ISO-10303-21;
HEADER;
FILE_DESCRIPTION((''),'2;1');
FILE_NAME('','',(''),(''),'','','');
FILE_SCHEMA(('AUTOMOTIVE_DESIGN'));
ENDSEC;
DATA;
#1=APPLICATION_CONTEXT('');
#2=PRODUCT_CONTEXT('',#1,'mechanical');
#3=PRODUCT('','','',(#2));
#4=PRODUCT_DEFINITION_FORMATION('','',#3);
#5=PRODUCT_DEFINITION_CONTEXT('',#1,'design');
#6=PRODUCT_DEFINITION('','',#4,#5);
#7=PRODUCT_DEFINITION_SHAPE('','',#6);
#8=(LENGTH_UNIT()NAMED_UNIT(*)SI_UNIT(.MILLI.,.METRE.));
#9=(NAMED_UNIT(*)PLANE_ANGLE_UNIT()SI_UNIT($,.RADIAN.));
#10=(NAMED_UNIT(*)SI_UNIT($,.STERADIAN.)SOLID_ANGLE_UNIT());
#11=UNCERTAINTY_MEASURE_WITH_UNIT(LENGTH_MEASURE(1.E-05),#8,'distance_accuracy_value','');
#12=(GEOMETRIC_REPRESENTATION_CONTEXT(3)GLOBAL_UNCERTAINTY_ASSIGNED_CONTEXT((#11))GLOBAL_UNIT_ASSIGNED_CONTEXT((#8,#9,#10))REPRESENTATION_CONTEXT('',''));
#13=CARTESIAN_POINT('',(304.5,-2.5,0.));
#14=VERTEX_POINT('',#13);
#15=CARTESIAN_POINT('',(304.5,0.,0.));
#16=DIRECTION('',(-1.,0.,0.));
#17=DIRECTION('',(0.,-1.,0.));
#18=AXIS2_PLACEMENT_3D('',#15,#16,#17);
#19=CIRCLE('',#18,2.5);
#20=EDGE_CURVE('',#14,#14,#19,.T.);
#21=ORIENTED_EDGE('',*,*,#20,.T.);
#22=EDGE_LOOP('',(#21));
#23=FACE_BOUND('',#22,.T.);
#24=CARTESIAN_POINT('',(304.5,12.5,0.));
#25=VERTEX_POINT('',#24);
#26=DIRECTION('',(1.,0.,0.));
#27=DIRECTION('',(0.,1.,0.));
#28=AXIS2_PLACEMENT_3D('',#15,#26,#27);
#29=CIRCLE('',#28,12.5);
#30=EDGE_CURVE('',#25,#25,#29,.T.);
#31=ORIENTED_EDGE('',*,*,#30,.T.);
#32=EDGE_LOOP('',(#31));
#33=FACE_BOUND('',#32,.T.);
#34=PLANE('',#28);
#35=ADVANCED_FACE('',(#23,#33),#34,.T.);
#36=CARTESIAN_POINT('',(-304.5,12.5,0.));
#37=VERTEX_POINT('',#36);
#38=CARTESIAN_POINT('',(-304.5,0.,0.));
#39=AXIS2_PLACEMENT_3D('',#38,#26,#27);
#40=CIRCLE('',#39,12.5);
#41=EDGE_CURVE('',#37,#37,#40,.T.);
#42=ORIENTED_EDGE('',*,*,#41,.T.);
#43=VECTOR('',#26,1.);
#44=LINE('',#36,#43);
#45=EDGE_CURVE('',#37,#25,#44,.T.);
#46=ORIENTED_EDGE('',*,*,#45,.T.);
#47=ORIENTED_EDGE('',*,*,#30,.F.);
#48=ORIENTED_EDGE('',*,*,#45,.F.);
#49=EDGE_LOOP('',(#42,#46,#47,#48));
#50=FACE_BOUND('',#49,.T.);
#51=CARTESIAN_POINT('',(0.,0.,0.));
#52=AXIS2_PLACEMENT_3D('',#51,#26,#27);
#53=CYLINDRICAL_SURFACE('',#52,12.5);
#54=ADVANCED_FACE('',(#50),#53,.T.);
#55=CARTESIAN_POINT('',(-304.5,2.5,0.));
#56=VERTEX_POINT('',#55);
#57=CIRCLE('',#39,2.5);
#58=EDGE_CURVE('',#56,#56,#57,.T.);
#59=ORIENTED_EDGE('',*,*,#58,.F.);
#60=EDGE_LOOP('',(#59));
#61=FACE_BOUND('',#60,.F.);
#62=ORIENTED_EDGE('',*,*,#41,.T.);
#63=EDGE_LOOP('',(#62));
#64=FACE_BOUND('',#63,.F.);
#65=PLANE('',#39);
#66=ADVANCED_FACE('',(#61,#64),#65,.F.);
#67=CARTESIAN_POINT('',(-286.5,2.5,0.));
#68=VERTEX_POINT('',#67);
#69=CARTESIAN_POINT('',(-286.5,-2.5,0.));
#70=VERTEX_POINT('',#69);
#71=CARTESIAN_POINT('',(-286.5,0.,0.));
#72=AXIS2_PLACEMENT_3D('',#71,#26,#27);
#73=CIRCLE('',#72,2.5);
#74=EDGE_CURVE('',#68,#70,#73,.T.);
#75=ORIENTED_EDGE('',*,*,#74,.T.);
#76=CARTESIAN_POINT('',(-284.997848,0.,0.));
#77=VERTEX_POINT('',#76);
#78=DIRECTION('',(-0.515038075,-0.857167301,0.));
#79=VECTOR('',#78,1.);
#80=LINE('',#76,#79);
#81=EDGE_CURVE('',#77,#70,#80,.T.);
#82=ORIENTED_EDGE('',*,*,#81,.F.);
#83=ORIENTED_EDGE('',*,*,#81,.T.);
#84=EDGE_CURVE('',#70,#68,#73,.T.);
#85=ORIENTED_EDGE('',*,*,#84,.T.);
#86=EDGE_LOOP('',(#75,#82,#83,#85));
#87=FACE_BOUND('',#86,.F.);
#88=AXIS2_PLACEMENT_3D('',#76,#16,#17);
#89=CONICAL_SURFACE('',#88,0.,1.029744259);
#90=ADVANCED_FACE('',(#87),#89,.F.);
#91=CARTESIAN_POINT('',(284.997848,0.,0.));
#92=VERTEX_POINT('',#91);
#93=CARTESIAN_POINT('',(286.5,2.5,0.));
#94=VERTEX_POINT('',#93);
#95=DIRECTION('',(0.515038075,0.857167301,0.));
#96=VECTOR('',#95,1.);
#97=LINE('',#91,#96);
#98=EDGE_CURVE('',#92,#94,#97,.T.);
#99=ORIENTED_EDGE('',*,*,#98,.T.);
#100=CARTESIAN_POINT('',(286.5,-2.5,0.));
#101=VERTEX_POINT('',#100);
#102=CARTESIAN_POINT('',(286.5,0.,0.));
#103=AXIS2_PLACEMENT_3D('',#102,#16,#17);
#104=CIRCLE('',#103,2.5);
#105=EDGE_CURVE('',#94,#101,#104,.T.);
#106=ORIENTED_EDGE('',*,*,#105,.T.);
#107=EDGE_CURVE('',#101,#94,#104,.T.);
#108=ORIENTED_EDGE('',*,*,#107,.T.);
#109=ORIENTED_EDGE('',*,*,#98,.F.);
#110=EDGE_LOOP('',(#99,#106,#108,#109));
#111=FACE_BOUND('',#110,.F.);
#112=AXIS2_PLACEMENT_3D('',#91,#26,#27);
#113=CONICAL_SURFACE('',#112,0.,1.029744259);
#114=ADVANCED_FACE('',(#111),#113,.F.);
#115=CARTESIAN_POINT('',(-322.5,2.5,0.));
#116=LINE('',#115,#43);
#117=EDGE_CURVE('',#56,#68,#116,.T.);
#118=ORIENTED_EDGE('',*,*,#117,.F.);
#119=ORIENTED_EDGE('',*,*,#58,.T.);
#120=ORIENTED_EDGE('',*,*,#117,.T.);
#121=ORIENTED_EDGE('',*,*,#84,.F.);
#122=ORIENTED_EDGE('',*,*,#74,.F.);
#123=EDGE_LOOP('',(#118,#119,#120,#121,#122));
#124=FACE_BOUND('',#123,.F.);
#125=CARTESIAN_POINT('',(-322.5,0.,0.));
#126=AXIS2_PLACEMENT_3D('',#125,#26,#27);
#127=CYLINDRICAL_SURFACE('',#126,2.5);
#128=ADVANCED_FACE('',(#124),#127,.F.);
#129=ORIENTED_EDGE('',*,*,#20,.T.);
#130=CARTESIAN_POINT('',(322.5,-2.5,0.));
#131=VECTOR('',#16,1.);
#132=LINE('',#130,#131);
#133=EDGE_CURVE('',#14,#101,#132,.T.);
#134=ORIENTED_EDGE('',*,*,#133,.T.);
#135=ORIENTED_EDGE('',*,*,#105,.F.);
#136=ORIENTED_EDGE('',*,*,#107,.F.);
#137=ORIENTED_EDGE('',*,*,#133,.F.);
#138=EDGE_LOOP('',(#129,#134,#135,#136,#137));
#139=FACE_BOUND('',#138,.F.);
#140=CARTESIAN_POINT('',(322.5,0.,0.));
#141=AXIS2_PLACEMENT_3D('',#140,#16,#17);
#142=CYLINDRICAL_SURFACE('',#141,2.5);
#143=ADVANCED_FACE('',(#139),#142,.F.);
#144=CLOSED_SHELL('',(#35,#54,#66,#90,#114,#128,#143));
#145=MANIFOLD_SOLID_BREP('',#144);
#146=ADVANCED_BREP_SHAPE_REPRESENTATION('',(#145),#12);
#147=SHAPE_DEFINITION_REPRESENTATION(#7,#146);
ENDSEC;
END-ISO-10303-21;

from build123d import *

# Parameters (mm, degrees)
F0_R           = 12.5
F1_DEPTH       = 304.5
F4_D           = 5
F4_DEPTH       = 18
F4_TIP         = 1.5021515476
F4_ON_F2_D     = 5
F4_ON_F2_DEPTH = 18
F4_ON_F2_TIP   = 1.5021515476


with BuildPart() as f1:
    # F0 (on Right) → F1 (new body, symmetric)
    with BuildSketch(Plane.YZ):
        Circle(F0_R)
    extrude(amount=F1_DEPTH, both=True)

    # F4
    with Locations(Plane(origin=(-304.5, 0, 0), x_dir=(0, -1, 0), z_dir=(-1, 0, 0))):
        with Locations((0, 0)):
            Hole(F4_D / 2, depth=F4_DEPTH)
            with Locations((0, 0, -(F4_DEPTH + F4_TIP / 2))):  # 118° drill point
                Cone(0, F4_D / 2, F4_TIP, mode=Mode.SUBTRACT)

    # F4 on F2
    with Locations(Plane.YZ.offset(304.5)):
        with Locations((0, 0)):
            Hole(F4_ON_F2_D / 2, depth=F4_ON_F2_DEPTH)
            with Locations((0, 0, -(F4_ON_F2_DEPTH + F4_ON_F2_TIP / 2))):  # 118° drill point
                Cone(0, F4_ON_F2_D / 2, F4_ON_F2_TIP, mode=Mode.SUBTRACT)


solid = f1.part
